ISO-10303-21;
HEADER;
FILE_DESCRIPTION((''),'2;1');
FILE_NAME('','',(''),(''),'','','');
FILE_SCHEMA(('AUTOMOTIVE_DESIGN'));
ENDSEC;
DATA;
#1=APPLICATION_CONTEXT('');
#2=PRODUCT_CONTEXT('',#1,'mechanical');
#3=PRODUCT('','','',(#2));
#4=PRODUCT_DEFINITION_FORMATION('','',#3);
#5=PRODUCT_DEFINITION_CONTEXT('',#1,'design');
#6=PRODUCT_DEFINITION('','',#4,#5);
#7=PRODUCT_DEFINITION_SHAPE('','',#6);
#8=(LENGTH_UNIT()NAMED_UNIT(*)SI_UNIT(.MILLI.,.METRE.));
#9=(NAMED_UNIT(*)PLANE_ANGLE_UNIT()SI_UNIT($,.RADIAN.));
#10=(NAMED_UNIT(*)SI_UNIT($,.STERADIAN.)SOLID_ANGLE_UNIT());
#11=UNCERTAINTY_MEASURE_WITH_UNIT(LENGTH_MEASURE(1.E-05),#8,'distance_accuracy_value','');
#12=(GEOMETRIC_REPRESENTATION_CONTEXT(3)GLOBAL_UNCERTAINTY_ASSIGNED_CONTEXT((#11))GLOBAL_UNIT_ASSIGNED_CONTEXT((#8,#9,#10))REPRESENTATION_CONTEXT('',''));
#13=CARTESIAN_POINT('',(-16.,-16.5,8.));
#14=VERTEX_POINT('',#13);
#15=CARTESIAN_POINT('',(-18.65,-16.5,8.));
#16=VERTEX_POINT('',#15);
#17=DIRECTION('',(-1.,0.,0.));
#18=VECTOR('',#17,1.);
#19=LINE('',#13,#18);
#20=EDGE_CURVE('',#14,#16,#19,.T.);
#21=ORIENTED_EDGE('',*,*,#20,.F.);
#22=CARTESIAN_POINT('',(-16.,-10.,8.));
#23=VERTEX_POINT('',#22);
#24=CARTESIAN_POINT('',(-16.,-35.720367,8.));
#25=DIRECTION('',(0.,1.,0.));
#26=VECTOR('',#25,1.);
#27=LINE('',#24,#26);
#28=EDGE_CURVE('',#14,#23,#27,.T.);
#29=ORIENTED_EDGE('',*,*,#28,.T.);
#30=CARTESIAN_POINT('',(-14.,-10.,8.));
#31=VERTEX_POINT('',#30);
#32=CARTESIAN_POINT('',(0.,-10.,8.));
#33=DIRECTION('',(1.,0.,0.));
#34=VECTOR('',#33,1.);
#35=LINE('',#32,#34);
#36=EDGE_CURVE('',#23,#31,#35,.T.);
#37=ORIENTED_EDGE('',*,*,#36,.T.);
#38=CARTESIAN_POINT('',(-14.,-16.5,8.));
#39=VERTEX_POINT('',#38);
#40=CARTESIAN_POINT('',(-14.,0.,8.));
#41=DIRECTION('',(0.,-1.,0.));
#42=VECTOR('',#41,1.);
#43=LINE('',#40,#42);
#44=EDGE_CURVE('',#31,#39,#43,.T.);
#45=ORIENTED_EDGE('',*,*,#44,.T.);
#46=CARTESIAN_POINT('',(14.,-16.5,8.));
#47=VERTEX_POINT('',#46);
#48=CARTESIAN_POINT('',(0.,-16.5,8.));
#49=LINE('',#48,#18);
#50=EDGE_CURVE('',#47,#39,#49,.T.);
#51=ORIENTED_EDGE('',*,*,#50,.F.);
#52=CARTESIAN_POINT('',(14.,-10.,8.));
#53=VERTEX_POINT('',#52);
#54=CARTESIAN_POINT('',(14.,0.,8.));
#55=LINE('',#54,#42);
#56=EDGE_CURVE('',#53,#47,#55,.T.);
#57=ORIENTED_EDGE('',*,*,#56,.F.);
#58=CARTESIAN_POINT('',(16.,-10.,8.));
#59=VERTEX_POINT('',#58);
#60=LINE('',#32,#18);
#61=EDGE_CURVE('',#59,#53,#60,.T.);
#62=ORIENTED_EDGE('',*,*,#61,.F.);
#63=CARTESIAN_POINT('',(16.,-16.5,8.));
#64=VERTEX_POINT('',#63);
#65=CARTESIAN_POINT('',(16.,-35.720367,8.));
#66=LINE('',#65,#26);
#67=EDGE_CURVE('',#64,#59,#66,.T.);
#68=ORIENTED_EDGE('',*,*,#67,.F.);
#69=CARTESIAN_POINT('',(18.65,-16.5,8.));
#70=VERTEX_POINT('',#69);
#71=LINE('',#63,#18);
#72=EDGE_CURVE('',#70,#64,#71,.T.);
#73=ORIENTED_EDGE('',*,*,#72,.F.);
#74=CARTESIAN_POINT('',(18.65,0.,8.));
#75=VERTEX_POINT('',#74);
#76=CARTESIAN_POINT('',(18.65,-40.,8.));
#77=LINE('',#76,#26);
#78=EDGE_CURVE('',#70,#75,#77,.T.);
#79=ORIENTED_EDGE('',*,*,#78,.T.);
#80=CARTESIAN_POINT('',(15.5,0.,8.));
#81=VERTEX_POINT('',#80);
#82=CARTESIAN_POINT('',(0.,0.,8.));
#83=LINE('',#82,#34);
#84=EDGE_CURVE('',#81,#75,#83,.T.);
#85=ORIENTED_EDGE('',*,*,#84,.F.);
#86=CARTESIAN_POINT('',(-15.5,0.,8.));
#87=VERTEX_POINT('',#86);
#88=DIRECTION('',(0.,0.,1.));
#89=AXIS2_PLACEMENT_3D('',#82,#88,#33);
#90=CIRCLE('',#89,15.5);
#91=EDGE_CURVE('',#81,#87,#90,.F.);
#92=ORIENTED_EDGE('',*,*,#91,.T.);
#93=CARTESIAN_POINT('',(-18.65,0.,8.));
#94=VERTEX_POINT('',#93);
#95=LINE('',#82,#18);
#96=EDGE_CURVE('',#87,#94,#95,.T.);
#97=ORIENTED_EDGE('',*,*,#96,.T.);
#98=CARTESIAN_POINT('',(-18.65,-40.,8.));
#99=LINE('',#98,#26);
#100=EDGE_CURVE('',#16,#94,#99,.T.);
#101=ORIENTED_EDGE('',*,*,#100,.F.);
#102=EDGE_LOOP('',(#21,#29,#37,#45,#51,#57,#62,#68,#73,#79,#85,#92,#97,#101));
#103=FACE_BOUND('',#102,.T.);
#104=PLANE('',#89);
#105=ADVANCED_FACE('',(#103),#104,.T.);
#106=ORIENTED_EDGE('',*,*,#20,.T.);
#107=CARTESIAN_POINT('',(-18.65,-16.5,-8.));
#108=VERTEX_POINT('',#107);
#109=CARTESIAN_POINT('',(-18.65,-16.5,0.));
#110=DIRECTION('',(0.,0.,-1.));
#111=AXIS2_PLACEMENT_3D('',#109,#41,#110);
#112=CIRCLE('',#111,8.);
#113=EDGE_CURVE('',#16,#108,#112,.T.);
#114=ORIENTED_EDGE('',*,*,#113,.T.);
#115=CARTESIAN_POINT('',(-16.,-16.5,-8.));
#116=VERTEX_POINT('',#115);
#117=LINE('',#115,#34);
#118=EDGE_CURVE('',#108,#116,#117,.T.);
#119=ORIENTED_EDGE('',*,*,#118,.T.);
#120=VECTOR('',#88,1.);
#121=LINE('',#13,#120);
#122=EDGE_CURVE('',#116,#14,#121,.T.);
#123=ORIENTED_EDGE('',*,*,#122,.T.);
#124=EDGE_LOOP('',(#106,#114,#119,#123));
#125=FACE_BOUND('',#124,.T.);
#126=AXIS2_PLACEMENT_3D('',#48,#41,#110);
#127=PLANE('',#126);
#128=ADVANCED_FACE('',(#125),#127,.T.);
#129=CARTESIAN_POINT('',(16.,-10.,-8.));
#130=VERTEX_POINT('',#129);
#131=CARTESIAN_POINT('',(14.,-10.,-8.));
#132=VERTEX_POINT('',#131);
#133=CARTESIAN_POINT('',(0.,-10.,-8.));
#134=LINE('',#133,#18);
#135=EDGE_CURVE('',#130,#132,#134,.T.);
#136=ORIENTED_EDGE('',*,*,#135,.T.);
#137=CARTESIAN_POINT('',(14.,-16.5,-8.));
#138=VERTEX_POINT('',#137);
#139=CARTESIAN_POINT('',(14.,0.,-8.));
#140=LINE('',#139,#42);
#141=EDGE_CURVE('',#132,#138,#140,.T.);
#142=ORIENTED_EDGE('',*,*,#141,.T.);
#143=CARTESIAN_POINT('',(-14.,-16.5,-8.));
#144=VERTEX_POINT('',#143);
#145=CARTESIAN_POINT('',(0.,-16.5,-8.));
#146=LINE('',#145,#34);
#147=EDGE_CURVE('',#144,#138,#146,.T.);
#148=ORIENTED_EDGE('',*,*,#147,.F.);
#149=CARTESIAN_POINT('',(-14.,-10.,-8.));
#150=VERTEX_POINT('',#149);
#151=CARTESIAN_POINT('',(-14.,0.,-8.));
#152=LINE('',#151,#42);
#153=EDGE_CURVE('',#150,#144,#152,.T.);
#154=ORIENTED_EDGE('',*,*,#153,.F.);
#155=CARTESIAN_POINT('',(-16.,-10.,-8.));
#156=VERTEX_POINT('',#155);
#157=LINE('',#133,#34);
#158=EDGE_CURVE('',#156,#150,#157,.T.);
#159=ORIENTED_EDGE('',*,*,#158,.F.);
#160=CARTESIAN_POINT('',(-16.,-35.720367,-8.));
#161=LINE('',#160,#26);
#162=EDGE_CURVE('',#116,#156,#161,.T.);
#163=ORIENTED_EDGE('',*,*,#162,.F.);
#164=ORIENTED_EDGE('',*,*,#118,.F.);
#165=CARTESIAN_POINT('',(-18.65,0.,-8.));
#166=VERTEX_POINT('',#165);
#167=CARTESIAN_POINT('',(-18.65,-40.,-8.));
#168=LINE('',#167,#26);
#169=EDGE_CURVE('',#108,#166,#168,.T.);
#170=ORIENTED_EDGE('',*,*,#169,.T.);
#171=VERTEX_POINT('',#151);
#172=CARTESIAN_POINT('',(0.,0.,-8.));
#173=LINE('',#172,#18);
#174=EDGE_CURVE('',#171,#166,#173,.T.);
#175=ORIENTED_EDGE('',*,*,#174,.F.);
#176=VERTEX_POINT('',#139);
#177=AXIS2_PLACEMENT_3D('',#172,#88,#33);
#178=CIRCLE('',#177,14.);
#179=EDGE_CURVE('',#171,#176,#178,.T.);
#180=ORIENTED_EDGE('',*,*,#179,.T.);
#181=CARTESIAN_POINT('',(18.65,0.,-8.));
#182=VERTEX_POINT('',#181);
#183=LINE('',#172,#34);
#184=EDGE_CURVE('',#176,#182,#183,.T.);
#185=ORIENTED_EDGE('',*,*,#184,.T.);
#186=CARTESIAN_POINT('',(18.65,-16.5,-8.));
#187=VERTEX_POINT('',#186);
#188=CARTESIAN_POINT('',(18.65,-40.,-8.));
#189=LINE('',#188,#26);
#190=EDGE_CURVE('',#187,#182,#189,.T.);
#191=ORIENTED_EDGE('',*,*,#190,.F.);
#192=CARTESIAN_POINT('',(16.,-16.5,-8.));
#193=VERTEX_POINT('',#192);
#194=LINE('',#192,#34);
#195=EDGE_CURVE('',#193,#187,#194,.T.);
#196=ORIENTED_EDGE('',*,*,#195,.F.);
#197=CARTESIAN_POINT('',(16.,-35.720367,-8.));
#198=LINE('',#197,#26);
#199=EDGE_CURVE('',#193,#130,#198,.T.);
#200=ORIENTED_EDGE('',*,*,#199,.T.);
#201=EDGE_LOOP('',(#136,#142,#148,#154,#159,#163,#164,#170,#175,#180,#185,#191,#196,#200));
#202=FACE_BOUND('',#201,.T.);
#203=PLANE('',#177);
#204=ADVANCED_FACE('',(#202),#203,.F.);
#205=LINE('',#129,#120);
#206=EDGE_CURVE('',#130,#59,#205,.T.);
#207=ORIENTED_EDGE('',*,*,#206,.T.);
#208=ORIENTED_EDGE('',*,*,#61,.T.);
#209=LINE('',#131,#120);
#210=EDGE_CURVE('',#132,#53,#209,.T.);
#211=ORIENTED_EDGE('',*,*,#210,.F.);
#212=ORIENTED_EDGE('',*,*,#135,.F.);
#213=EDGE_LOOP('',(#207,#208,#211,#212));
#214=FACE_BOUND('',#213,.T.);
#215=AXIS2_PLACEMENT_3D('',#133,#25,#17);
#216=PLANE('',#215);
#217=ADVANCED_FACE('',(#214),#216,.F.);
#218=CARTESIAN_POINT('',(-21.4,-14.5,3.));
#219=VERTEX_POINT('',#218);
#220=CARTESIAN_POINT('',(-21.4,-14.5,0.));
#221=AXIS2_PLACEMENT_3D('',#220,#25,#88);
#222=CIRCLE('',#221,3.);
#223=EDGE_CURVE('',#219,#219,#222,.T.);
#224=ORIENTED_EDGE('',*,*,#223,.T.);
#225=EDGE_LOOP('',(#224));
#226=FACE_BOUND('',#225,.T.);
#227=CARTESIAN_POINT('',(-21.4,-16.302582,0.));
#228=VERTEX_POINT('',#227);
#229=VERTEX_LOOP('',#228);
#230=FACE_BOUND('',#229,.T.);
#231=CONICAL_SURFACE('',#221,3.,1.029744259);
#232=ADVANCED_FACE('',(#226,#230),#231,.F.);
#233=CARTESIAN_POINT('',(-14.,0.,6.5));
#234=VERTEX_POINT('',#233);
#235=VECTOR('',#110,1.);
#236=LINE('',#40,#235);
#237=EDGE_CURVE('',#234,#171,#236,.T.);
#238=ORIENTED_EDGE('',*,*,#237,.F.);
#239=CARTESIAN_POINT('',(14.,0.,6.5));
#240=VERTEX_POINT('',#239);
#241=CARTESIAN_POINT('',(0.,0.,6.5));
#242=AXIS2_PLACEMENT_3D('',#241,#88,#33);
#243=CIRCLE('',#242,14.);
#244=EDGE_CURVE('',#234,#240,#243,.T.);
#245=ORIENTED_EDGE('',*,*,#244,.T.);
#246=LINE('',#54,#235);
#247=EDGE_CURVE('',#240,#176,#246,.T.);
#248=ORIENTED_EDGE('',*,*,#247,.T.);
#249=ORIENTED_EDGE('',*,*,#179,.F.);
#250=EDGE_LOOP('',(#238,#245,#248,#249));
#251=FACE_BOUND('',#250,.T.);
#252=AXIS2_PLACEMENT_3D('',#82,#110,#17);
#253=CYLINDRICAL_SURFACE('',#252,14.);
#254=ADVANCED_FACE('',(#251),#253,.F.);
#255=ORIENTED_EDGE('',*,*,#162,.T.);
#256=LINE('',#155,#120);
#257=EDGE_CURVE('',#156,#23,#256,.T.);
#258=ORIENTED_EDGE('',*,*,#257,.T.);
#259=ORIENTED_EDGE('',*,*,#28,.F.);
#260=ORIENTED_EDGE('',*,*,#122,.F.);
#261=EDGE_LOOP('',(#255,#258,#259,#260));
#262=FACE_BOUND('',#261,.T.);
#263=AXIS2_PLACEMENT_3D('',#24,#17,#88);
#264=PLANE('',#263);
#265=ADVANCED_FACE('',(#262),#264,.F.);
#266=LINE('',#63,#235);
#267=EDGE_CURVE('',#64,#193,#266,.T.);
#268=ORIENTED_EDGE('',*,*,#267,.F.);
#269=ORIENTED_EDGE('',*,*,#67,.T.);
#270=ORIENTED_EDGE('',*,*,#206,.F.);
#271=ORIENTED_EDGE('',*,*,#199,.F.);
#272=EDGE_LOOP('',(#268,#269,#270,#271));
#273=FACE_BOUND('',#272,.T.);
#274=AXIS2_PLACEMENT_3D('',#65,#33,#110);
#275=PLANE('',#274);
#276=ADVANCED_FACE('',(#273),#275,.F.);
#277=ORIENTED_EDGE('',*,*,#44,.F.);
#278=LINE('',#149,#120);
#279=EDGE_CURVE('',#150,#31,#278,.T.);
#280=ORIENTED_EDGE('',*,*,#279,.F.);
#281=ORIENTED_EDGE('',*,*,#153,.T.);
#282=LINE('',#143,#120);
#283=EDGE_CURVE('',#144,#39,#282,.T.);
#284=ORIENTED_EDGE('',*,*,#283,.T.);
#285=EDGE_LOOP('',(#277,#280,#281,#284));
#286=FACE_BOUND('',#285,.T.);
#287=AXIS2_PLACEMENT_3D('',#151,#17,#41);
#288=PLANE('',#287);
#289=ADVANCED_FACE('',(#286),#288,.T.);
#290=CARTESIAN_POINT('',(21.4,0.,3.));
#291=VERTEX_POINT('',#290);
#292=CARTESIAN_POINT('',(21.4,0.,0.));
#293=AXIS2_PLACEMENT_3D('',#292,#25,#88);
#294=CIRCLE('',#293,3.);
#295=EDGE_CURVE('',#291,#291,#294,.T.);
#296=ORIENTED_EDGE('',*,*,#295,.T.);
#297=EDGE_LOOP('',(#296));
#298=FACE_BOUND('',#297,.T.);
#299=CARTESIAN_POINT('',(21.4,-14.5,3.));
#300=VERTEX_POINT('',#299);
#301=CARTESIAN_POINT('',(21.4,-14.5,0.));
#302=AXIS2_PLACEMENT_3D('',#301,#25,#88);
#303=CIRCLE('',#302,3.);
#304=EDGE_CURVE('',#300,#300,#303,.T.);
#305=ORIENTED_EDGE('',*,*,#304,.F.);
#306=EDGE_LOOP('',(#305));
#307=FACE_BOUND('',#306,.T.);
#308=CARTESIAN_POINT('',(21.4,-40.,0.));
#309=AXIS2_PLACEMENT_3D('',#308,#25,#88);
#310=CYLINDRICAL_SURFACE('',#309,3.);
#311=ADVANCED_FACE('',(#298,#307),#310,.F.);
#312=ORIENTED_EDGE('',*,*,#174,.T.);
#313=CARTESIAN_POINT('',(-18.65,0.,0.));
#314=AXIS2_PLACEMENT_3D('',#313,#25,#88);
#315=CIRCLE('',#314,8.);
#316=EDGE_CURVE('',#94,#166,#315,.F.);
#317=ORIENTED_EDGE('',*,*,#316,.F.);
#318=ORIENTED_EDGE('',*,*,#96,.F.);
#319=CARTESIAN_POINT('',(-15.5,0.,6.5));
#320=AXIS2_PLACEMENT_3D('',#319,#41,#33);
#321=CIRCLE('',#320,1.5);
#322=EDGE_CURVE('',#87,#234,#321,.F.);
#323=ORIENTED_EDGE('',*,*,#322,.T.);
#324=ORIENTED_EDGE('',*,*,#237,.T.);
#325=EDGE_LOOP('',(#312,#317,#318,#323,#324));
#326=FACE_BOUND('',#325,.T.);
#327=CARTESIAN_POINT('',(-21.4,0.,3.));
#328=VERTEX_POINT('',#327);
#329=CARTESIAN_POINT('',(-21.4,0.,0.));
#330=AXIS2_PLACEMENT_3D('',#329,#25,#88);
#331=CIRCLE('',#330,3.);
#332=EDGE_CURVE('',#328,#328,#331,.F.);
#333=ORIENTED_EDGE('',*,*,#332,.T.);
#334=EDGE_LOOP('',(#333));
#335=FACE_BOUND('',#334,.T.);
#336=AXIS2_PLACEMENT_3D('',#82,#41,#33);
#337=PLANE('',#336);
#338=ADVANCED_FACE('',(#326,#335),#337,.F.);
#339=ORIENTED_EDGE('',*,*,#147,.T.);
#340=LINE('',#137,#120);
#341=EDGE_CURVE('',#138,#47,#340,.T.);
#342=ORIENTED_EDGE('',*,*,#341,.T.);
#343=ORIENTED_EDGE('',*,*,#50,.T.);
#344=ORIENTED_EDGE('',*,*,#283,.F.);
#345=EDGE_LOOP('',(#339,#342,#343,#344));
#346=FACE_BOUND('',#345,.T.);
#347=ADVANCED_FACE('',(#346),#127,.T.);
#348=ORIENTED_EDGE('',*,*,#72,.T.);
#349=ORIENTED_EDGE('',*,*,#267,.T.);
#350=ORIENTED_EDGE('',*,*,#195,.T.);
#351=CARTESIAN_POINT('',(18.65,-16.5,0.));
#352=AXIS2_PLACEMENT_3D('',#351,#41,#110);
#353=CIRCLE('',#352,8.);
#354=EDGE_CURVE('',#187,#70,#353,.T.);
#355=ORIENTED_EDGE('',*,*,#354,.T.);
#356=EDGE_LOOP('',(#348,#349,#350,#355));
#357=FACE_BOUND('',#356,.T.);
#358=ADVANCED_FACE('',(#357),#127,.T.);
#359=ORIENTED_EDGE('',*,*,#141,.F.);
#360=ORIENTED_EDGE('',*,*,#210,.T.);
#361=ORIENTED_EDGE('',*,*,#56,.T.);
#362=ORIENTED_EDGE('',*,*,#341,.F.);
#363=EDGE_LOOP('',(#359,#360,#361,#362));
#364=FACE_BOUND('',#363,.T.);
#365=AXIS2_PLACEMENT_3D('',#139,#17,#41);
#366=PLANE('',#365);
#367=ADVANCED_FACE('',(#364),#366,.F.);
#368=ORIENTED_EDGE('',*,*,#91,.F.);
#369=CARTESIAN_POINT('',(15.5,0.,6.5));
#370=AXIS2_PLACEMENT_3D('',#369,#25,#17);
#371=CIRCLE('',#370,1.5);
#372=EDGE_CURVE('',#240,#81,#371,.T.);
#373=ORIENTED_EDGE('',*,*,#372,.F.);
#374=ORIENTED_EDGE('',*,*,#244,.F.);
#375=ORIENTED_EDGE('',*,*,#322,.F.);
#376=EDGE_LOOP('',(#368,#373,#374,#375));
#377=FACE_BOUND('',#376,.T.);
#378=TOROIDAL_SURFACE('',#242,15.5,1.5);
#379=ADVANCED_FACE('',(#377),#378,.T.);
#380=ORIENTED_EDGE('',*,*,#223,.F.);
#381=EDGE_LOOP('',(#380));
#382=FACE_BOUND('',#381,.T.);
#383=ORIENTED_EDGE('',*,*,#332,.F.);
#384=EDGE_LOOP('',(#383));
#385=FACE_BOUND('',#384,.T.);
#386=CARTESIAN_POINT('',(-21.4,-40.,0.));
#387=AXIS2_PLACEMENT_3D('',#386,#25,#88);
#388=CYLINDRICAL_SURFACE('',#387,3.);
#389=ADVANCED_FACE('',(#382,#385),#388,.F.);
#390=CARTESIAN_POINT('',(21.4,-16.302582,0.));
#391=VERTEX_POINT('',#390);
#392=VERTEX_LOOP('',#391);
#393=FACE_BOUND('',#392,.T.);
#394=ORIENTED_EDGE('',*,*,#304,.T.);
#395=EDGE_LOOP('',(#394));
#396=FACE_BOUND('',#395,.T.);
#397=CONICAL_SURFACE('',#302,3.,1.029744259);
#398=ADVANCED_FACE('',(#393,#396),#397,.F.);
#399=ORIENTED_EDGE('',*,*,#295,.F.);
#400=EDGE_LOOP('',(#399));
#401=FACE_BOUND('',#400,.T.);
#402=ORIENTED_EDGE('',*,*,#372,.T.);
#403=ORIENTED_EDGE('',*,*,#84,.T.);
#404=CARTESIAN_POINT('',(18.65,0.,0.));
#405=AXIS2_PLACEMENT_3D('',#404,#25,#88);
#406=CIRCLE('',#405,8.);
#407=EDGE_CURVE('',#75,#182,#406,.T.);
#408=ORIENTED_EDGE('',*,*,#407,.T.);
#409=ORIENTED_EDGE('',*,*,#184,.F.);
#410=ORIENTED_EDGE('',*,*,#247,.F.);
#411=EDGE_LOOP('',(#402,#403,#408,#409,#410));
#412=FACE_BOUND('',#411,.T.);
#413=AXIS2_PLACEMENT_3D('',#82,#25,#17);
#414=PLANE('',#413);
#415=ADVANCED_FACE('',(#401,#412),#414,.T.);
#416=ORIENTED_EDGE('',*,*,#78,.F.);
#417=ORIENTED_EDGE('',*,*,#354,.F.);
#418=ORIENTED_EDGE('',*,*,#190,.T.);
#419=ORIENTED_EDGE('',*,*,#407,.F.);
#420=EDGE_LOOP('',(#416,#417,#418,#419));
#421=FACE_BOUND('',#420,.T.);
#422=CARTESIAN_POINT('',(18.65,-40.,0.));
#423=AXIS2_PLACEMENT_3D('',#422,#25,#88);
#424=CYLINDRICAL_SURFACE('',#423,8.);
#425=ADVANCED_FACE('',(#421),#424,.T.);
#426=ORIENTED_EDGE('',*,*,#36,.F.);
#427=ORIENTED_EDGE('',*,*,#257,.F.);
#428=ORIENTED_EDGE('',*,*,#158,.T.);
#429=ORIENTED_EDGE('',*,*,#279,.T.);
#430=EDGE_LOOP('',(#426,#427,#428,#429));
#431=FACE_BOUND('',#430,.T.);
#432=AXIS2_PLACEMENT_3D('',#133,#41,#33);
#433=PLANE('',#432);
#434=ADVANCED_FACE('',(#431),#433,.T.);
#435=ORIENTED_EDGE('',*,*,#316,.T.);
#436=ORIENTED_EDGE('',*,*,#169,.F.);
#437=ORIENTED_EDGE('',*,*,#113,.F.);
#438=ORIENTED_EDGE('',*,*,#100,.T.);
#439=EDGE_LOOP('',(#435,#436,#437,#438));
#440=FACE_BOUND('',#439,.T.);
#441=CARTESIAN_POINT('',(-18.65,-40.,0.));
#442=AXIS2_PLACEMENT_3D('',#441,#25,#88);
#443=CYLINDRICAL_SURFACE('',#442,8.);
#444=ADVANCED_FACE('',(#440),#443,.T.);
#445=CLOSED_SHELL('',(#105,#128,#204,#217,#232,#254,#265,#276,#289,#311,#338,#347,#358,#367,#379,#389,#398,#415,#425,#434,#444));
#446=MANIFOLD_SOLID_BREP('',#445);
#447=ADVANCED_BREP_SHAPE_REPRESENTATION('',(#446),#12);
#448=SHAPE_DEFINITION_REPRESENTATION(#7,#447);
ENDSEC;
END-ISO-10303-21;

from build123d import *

# Parameters (mm, degrees)
DODANIE_WYCI_GNI_CIE1_DEPTH     = 8
SZKIC4_R                        = 3
WYTNIJ_WYCI_GNI_CIE1_DEPTH      = 51.635955605
ZAOKR_GLENIE1_R                 = 1.5
WYTNIJ_WYCI_GNI_CIE4_START      = -16
WYTNIJ_WYCI_GNI_CIE4_DEPTH      = 16
WYTNIJ_WYCI_GNI_CIE8_DEPTH      = 36.191937997
WYTNIJ_WYCI_GNI_CIE8_DEPTH_BACK = 36.191937997
SZKIC15_W                       = 2
SZKIC15_H                       = 6.5
SZKIC16_R                       = 3
DODANIE_WYCI_GNI_CIE2_DEPTH     = 11.5
DODANIE_WYCI_GNI_CIE3_START     = -3
SZKIC17_R                       = 3
DODANIE_WYCI_GNI_CIE3_DEPTH     = 3
OTWORY_USTALAJ_CE_6_0MM1_D      = 6
OTWORY_USTALAJ_CE_6_0MM1_DEPTH  = 1
OTWORY_USTALAJ_CE_6_0MM1_TIP    = 1.802581857


# Read off the part's stored shape, not the designer's step: Wytnij-wyciągnięcie4
with BuildPart() as part:
    # Szkic1 → Dodanie-wyciągnięcie1 (new, symmetric)
    with BuildSketch(Plane.XY):
        with BuildLine():
            ThreePointArc((-16, 0), (0, -16), (16, 0))
            Line((16, 0), (30, 0))
            Line((30, 0), (30, -40))
            Line((30, -40), (-30, -40))
            Line((-30, -40), (-30, 0))
            Line((-30, 0), (-16, 0))
        make_face()
        with BuildLine():
            ThreePointArc((-14, 0), (0, -14), (14, 0))
            Line((14, 0), (16, 0))
            ThreePointArc((16, 0), (0, -16), (-16, 0))
            Line((-16, 0), (-14, 0))
        make_face()
    extrude(amount=DODANIE_WYCI_GNI_CIE1_DEPTH, both=True)

    # Szkic4 → Wytnij-wyciągnięcie1 (cut, through all)
    with BuildSketch(Plane(origin=(0, 0, 0), x_dir=(1, 0, 0), z_dir=(0, 1, 0))):
        with BuildLine():
            ThreePointArc((-18.65, -8), (-26.65, 0), (-18.65, 8))
            Line((-18.65, 8), (-30, 8))
            Line((-30, 8), (-30, -8))
            Line((-30, -8), (-18.65, -8))
        make_face()
        with BuildLine():
            Line((30, 8), (18.65, 8))
            ThreePointArc((18.65, 8), (26.65, 0), (18.65, -8))
            Line((18.65, -8), (30, -8))
            Line((30, -8), (30, 8))
        make_face()
        with Locations(Location((21.4, 0, 0), (0, 0, 270))):
            Circle(SZKIC4_R)
        with Locations(Location((-21.4, 0, 0), (0, 0, 270))):
            Circle(SZKIC4_R)
    extrude(amount=-WYTNIJ_WYCI_GNI_CIE1_DEPTH, mode=Mode.SUBTRACT)

    # Zaokrąglenie1
    zaokr_glenie1_edges = [part.edges().sort_by_distance(p)[0] for p in [
        (0, -14, 8),
    ]]
    fillet(zaokr_glenie1_edges, radius=ZAOKR_GLENIE1_R)

    # Wytnij-wyciągnięcie4 outline → Wytnij-wyciągnięcie4 (cut)
    with BuildSketch(Plane(origin=(0, 0, -8), x_dir=(-1, 0, 0), z_dir=(0, 0, -1)).offset(WYTNIJ_WYCI_GNI_CIE4_START)):
        Polygon((-16, -16.5), (-16, -5), (-37.876810691, -5), (-37.876810691, -40), (49.702662137, -40), (49.702662137, -5), (16, -5), (16, -16.5), align=None)
    extrude(amount=WYTNIJ_WYCI_GNI_CIE4_DEPTH, mode=Mode.SUBTRACT)

    # Szkic15 → Wytnij-wyciągnięcie8 (cut, two sides: drawn at the far end of the back side and taken through both)
    with BuildSketch(Plane.XY.offset(8).offset(-WYTNIJ_WYCI_GNI_CIE8_DEPTH_BACK)):
        with Locations((15, -13.25)):
            Rectangle(SZKIC15_W, SZKIC15_H)
        with Locations((-15, -13.25)):
            Rectangle(SZKIC15_W, SZKIC15_H)
    extrude(amount=WYTNIJ_WYCI_GNI_CIE8_DEPTH + WYTNIJ_WYCI_GNI_CIE8_DEPTH_BACK, mode=Mode.SUBTRACT)

    # Szkic16 → Dodanie-wyciągnięcie2 (add)
    # profile 1 of 2: a face of its own
    with BuildSketch(Plane.XZ.offset(5)):
        with BuildLine():
            Line((-16, 8), (-16, -8))
            Line((-16, -8), (-18.65, -8))
            ThreePointArc((-18.65, -8), (-26.65, 0), (-18.65, 8))
            Line((-18.65, 8), (-16, 8))
        make_face()
        with Locations(Location((-21.4, 0, 0), (0, 0, 90))):
            Circle(SZKIC16_R, mode=Mode.SUBTRACT)
    # profile 2 of 2: a face of its own
    with BuildSketch(Plane.XZ.offset(5)):
        with BuildLine():
            Line((16, 8), (16, -8))
            Line((16, -8), (18.65, -8))
            ThreePointArc((18.65, -8), (26.65, 0), (18.65, 8))
            Line((18.65, 8), (16, 8))
        make_face()
        with Locations(Location((21.4, 0, 0), (0, 0, 90))):
            Circle(SZKIC16_R, mode=Mode.SUBTRACT)
    extrude(amount=DODANIE_WYCI_GNI_CIE2_DEPTH)

    # Szkic17 → Dodanie-wyciągnięcie3 (add)
    with BuildSketch(Plane.XZ.offset(16.5).offset(DODANIE_WYCI_GNI_CIE3_START)):
        with Locations(Location((-21.4, 0, 0), (0, 0, 90))):
            Circle(SZKIC17_R)
        with Locations(Location((21.4, 0, 0), (0, 0, 90))):
            Circle(SZKIC17_R)
    extrude(amount=DODANIE_WYCI_GNI_CIE3_DEPTH)

    # Otwory ustalające Ø6.0mm1
    with Locations(Plane(origin=(-21.4, -13.5, 0), x_dir=(0, 0, 1), z_dir=(0, 1, 0))):
        with Locations((0, 0), (0, 42.8)):
            Hole(OTWORY_USTALAJ_CE_6_0MM1_D / 2, depth=OTWORY_USTALAJ_CE_6_0MM1_DEPTH)
            with Locations((0, 0, -(OTWORY_USTALAJ_CE_6_0MM1_DEPTH + OTWORY_USTALAJ_CE_6_0MM1_TIP / 2))):  # 118° drill point
                Cone(0, OTWORY_USTALAJ_CE_6_0MM1_D / 2, OTWORY_USTALAJ_CE_6_0MM1_TIP, mode=Mode.SUBTRACT)


solid = part.part
